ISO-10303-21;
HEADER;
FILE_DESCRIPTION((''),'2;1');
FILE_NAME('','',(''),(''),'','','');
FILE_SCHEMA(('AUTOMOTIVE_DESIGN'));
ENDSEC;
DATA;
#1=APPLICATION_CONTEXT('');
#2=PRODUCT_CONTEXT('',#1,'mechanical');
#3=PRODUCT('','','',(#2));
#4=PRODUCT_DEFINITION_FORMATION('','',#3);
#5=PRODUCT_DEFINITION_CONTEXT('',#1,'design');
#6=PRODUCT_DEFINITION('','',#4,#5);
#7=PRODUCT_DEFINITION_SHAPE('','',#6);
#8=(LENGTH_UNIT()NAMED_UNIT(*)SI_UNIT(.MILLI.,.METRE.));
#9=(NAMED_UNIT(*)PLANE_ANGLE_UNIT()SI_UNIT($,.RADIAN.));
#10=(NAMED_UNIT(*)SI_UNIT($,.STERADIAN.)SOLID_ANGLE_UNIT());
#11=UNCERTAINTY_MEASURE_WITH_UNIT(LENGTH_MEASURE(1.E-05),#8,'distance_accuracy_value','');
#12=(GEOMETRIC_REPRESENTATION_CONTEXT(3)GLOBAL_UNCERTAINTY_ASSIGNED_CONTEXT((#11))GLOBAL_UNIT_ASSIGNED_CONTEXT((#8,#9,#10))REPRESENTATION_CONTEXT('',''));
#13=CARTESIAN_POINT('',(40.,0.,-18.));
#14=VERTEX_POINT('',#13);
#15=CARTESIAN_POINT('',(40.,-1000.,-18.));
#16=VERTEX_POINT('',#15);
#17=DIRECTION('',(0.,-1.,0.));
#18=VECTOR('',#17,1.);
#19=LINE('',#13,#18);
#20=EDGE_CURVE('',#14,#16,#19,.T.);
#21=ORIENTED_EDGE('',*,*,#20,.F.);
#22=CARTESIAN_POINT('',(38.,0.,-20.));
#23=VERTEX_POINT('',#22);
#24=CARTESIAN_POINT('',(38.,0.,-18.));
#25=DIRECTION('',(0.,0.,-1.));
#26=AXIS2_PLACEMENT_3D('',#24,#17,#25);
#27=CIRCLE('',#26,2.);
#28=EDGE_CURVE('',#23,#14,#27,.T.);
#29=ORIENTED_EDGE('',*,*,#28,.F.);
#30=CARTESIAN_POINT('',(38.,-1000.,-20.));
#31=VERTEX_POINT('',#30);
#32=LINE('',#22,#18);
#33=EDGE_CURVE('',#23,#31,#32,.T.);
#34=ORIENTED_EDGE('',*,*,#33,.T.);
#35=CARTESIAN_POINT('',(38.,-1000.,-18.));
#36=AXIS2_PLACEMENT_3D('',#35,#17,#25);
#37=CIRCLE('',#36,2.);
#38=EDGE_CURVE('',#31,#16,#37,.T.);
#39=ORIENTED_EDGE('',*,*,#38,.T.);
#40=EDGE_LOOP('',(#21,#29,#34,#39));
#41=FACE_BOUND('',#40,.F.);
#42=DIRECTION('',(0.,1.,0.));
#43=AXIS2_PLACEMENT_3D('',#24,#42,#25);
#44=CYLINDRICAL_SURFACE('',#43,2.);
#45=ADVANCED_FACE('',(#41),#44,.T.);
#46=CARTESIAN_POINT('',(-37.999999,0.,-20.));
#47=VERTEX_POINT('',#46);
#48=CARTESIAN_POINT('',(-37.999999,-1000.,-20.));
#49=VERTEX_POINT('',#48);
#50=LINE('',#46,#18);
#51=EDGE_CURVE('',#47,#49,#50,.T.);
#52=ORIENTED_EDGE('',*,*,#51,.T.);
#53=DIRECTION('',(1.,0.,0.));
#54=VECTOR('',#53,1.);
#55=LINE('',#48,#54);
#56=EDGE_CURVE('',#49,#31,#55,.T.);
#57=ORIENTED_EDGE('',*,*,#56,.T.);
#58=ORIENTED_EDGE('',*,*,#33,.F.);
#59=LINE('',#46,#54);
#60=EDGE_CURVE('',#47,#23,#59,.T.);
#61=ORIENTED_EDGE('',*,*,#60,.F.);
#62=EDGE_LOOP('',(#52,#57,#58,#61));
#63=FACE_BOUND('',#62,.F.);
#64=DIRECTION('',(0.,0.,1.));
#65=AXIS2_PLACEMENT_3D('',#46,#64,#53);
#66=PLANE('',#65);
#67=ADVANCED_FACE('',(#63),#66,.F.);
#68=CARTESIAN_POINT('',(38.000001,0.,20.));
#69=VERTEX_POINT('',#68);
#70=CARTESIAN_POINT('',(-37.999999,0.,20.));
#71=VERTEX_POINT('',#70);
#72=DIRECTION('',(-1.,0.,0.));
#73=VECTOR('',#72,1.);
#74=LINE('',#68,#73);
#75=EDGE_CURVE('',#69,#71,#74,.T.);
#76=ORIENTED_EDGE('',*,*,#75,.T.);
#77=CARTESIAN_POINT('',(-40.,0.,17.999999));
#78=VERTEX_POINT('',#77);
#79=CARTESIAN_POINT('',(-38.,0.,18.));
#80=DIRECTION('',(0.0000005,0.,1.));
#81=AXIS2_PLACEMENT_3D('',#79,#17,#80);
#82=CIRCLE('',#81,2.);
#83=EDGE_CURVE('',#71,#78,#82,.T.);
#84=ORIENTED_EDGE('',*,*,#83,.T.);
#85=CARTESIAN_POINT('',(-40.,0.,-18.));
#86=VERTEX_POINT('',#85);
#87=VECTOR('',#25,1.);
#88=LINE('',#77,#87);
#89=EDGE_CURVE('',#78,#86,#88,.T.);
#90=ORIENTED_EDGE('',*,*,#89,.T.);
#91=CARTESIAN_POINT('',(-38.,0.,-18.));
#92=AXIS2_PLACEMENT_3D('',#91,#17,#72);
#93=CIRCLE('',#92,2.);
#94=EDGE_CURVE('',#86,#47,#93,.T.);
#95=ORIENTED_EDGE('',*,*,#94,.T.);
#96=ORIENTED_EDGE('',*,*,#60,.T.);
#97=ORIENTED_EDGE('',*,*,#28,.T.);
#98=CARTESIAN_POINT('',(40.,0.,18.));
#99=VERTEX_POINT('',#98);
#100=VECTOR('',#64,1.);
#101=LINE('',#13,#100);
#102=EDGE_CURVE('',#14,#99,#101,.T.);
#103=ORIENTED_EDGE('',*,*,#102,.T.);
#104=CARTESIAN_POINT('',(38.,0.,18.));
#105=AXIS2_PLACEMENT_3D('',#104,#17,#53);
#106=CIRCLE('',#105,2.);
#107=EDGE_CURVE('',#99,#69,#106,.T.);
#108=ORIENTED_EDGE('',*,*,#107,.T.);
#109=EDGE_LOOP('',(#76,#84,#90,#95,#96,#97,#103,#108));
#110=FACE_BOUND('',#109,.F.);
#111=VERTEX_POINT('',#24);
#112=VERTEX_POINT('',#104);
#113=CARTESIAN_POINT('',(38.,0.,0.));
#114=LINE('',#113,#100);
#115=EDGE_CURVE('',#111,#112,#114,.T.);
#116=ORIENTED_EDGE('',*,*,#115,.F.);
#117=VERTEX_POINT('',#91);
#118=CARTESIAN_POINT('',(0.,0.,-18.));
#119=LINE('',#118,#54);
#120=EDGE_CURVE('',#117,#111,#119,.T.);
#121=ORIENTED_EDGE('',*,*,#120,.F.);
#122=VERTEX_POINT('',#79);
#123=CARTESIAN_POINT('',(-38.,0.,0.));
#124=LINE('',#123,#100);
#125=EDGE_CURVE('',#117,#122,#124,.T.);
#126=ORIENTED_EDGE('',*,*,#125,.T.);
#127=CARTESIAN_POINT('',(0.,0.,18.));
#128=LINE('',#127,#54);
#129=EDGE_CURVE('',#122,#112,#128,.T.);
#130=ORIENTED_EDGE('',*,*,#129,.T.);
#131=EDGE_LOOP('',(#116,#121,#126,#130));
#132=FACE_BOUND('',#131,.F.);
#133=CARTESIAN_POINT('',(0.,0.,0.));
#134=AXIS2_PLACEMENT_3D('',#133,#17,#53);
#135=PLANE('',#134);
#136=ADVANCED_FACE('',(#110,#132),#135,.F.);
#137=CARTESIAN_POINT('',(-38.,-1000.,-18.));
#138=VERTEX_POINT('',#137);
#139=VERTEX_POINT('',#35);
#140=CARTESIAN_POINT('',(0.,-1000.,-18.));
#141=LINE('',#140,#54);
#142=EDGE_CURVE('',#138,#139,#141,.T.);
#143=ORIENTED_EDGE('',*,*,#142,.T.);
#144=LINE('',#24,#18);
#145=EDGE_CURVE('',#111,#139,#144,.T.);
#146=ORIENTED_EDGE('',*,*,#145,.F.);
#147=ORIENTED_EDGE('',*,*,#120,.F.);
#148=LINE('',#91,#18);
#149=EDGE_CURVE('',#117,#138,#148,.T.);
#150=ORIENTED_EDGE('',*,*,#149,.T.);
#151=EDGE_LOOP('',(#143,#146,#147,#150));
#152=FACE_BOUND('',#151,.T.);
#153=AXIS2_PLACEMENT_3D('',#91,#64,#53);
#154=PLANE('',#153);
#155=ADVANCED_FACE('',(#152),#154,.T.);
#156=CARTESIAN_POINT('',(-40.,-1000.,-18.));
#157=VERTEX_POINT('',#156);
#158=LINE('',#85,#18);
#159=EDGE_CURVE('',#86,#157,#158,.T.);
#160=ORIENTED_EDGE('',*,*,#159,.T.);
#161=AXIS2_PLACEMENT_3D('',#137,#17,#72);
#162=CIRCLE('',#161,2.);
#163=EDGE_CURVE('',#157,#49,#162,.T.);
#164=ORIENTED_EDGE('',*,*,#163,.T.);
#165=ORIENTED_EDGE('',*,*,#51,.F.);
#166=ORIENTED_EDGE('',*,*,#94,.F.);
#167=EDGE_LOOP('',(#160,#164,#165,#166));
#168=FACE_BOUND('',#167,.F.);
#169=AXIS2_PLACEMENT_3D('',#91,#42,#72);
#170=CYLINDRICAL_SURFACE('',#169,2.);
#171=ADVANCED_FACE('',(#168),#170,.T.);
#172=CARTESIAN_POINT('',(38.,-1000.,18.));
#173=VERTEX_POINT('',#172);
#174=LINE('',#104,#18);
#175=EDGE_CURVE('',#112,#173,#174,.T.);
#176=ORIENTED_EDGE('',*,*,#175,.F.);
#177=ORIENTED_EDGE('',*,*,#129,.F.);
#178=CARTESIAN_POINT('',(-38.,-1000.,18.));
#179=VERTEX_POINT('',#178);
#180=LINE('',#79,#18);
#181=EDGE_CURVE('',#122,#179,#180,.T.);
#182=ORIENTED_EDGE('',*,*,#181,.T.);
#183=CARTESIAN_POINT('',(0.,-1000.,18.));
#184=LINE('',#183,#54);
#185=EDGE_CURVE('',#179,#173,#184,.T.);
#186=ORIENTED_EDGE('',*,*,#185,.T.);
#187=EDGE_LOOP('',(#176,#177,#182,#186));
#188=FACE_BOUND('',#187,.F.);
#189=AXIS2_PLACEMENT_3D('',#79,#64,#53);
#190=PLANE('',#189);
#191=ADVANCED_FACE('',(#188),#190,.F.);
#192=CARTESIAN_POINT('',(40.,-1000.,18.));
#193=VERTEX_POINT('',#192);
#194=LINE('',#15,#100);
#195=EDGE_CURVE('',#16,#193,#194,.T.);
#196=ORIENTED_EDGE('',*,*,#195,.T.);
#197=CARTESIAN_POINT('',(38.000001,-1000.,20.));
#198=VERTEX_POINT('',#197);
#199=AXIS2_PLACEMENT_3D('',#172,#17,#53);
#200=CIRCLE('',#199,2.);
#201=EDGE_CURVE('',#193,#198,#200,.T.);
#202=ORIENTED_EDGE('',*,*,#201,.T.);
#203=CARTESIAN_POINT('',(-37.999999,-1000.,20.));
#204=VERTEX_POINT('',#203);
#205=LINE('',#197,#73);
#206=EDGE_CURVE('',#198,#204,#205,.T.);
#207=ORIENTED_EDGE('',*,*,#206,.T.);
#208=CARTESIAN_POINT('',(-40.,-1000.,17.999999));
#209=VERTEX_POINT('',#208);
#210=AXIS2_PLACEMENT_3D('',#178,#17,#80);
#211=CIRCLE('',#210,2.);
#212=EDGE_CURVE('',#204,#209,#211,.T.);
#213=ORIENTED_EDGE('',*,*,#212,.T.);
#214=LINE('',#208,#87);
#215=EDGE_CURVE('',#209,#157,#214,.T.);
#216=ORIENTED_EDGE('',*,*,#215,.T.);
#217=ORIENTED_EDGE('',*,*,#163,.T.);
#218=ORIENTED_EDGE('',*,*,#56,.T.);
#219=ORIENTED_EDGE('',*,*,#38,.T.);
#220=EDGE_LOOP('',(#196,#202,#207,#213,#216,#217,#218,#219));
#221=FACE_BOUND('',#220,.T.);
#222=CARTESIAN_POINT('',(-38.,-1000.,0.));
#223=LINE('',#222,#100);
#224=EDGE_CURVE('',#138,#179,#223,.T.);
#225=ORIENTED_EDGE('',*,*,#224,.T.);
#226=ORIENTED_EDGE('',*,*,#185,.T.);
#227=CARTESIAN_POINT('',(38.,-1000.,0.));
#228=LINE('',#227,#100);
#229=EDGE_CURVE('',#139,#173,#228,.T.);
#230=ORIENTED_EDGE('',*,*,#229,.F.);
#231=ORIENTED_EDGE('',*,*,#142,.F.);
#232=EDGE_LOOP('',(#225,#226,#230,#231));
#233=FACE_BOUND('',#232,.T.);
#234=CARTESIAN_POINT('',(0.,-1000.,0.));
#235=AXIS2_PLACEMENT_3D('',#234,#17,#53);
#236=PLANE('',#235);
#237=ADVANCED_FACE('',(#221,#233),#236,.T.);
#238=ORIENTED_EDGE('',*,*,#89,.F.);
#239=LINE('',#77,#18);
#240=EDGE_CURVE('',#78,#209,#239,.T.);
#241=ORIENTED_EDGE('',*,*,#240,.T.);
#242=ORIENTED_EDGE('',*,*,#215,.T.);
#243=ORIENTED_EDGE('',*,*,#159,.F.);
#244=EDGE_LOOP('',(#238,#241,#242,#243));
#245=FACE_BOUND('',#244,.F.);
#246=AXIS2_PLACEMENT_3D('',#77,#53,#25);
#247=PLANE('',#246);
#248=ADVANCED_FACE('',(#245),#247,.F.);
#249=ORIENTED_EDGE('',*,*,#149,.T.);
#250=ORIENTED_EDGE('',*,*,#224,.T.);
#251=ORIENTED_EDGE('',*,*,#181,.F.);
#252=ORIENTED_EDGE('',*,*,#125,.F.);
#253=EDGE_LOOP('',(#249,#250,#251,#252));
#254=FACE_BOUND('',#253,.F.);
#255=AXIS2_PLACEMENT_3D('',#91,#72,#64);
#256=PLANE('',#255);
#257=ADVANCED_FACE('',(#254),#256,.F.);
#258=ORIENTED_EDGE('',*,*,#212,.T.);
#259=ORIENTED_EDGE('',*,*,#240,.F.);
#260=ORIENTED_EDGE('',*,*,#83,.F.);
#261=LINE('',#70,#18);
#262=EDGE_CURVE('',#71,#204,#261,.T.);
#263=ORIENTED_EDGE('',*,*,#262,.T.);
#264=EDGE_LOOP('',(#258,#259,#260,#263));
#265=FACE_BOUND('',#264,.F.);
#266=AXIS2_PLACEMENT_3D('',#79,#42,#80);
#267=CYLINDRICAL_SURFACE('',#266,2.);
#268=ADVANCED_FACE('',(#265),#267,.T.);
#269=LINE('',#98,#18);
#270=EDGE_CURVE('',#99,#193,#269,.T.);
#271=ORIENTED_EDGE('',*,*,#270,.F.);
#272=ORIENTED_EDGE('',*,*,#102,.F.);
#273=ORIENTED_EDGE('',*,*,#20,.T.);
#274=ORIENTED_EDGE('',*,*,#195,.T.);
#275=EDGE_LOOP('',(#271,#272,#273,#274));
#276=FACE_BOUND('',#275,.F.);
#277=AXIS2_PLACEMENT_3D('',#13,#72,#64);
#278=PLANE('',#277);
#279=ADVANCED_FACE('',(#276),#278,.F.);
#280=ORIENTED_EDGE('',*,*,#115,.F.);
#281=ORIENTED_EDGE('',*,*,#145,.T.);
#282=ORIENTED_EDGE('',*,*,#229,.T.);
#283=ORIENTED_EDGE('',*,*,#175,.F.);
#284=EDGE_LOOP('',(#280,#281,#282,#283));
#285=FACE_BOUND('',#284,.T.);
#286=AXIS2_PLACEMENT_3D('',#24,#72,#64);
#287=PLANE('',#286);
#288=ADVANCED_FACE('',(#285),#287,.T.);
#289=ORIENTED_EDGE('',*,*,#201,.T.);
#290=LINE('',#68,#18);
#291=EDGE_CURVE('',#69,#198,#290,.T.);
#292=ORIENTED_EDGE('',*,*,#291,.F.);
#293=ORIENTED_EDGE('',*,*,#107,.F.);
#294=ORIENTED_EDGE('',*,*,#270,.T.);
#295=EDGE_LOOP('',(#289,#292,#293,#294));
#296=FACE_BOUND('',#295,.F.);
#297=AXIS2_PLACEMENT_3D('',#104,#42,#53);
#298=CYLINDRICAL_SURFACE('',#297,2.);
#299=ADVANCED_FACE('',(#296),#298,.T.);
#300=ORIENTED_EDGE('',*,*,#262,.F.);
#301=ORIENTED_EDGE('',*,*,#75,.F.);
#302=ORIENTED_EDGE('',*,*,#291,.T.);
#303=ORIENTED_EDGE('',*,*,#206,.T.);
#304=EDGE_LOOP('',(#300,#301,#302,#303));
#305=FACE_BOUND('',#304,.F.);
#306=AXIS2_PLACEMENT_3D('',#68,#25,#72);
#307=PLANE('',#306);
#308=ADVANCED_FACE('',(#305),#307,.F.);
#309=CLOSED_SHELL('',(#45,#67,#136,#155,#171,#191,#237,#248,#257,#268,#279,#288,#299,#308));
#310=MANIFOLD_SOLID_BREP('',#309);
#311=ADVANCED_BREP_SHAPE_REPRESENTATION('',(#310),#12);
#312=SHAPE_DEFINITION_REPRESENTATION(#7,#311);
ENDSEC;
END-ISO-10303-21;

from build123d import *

# Parameters (mm, degrees)
F0_W     = 76
F0_H     = 36
F1_DEPTH = 1000


# Not quite as in the source:
# - ends of sketch curves that miss each other by under 0.0002 mm in the source are joined


with BuildPart() as f1:
    # F0 (on Front) → F1 (new body)
    with BuildSketch(Plane.XZ):
        with BuildLine():
            ThreePointArc((-37.999999, 20), (-39.4142135624, 19.4142135624), (-40, 17.999999))
            Line((-40, 17.999999), (-40, -18))
            ThreePointArc((-40, -18), (-39.4142128553, -19.4142142695), (-37.999999, -20))
            Line((-37.999999, -20), (38, -20))
            ThreePointArc((38, -20), (39.4142139159, -19.4142132088), (40, -18))
            Line((40, -18), (40, 18))
            ThreePointArc((40, 18), (39.4142139159, 19.4142132088), (38.000001, 20))
            Line((38.000001, 20), (-37.999999, 20))
        make_face()
        Rectangle(F0_W, F0_H, mode=Mode.SUBTRACT)
    extrude(amount=F1_DEPTH)


solid = f1.part
